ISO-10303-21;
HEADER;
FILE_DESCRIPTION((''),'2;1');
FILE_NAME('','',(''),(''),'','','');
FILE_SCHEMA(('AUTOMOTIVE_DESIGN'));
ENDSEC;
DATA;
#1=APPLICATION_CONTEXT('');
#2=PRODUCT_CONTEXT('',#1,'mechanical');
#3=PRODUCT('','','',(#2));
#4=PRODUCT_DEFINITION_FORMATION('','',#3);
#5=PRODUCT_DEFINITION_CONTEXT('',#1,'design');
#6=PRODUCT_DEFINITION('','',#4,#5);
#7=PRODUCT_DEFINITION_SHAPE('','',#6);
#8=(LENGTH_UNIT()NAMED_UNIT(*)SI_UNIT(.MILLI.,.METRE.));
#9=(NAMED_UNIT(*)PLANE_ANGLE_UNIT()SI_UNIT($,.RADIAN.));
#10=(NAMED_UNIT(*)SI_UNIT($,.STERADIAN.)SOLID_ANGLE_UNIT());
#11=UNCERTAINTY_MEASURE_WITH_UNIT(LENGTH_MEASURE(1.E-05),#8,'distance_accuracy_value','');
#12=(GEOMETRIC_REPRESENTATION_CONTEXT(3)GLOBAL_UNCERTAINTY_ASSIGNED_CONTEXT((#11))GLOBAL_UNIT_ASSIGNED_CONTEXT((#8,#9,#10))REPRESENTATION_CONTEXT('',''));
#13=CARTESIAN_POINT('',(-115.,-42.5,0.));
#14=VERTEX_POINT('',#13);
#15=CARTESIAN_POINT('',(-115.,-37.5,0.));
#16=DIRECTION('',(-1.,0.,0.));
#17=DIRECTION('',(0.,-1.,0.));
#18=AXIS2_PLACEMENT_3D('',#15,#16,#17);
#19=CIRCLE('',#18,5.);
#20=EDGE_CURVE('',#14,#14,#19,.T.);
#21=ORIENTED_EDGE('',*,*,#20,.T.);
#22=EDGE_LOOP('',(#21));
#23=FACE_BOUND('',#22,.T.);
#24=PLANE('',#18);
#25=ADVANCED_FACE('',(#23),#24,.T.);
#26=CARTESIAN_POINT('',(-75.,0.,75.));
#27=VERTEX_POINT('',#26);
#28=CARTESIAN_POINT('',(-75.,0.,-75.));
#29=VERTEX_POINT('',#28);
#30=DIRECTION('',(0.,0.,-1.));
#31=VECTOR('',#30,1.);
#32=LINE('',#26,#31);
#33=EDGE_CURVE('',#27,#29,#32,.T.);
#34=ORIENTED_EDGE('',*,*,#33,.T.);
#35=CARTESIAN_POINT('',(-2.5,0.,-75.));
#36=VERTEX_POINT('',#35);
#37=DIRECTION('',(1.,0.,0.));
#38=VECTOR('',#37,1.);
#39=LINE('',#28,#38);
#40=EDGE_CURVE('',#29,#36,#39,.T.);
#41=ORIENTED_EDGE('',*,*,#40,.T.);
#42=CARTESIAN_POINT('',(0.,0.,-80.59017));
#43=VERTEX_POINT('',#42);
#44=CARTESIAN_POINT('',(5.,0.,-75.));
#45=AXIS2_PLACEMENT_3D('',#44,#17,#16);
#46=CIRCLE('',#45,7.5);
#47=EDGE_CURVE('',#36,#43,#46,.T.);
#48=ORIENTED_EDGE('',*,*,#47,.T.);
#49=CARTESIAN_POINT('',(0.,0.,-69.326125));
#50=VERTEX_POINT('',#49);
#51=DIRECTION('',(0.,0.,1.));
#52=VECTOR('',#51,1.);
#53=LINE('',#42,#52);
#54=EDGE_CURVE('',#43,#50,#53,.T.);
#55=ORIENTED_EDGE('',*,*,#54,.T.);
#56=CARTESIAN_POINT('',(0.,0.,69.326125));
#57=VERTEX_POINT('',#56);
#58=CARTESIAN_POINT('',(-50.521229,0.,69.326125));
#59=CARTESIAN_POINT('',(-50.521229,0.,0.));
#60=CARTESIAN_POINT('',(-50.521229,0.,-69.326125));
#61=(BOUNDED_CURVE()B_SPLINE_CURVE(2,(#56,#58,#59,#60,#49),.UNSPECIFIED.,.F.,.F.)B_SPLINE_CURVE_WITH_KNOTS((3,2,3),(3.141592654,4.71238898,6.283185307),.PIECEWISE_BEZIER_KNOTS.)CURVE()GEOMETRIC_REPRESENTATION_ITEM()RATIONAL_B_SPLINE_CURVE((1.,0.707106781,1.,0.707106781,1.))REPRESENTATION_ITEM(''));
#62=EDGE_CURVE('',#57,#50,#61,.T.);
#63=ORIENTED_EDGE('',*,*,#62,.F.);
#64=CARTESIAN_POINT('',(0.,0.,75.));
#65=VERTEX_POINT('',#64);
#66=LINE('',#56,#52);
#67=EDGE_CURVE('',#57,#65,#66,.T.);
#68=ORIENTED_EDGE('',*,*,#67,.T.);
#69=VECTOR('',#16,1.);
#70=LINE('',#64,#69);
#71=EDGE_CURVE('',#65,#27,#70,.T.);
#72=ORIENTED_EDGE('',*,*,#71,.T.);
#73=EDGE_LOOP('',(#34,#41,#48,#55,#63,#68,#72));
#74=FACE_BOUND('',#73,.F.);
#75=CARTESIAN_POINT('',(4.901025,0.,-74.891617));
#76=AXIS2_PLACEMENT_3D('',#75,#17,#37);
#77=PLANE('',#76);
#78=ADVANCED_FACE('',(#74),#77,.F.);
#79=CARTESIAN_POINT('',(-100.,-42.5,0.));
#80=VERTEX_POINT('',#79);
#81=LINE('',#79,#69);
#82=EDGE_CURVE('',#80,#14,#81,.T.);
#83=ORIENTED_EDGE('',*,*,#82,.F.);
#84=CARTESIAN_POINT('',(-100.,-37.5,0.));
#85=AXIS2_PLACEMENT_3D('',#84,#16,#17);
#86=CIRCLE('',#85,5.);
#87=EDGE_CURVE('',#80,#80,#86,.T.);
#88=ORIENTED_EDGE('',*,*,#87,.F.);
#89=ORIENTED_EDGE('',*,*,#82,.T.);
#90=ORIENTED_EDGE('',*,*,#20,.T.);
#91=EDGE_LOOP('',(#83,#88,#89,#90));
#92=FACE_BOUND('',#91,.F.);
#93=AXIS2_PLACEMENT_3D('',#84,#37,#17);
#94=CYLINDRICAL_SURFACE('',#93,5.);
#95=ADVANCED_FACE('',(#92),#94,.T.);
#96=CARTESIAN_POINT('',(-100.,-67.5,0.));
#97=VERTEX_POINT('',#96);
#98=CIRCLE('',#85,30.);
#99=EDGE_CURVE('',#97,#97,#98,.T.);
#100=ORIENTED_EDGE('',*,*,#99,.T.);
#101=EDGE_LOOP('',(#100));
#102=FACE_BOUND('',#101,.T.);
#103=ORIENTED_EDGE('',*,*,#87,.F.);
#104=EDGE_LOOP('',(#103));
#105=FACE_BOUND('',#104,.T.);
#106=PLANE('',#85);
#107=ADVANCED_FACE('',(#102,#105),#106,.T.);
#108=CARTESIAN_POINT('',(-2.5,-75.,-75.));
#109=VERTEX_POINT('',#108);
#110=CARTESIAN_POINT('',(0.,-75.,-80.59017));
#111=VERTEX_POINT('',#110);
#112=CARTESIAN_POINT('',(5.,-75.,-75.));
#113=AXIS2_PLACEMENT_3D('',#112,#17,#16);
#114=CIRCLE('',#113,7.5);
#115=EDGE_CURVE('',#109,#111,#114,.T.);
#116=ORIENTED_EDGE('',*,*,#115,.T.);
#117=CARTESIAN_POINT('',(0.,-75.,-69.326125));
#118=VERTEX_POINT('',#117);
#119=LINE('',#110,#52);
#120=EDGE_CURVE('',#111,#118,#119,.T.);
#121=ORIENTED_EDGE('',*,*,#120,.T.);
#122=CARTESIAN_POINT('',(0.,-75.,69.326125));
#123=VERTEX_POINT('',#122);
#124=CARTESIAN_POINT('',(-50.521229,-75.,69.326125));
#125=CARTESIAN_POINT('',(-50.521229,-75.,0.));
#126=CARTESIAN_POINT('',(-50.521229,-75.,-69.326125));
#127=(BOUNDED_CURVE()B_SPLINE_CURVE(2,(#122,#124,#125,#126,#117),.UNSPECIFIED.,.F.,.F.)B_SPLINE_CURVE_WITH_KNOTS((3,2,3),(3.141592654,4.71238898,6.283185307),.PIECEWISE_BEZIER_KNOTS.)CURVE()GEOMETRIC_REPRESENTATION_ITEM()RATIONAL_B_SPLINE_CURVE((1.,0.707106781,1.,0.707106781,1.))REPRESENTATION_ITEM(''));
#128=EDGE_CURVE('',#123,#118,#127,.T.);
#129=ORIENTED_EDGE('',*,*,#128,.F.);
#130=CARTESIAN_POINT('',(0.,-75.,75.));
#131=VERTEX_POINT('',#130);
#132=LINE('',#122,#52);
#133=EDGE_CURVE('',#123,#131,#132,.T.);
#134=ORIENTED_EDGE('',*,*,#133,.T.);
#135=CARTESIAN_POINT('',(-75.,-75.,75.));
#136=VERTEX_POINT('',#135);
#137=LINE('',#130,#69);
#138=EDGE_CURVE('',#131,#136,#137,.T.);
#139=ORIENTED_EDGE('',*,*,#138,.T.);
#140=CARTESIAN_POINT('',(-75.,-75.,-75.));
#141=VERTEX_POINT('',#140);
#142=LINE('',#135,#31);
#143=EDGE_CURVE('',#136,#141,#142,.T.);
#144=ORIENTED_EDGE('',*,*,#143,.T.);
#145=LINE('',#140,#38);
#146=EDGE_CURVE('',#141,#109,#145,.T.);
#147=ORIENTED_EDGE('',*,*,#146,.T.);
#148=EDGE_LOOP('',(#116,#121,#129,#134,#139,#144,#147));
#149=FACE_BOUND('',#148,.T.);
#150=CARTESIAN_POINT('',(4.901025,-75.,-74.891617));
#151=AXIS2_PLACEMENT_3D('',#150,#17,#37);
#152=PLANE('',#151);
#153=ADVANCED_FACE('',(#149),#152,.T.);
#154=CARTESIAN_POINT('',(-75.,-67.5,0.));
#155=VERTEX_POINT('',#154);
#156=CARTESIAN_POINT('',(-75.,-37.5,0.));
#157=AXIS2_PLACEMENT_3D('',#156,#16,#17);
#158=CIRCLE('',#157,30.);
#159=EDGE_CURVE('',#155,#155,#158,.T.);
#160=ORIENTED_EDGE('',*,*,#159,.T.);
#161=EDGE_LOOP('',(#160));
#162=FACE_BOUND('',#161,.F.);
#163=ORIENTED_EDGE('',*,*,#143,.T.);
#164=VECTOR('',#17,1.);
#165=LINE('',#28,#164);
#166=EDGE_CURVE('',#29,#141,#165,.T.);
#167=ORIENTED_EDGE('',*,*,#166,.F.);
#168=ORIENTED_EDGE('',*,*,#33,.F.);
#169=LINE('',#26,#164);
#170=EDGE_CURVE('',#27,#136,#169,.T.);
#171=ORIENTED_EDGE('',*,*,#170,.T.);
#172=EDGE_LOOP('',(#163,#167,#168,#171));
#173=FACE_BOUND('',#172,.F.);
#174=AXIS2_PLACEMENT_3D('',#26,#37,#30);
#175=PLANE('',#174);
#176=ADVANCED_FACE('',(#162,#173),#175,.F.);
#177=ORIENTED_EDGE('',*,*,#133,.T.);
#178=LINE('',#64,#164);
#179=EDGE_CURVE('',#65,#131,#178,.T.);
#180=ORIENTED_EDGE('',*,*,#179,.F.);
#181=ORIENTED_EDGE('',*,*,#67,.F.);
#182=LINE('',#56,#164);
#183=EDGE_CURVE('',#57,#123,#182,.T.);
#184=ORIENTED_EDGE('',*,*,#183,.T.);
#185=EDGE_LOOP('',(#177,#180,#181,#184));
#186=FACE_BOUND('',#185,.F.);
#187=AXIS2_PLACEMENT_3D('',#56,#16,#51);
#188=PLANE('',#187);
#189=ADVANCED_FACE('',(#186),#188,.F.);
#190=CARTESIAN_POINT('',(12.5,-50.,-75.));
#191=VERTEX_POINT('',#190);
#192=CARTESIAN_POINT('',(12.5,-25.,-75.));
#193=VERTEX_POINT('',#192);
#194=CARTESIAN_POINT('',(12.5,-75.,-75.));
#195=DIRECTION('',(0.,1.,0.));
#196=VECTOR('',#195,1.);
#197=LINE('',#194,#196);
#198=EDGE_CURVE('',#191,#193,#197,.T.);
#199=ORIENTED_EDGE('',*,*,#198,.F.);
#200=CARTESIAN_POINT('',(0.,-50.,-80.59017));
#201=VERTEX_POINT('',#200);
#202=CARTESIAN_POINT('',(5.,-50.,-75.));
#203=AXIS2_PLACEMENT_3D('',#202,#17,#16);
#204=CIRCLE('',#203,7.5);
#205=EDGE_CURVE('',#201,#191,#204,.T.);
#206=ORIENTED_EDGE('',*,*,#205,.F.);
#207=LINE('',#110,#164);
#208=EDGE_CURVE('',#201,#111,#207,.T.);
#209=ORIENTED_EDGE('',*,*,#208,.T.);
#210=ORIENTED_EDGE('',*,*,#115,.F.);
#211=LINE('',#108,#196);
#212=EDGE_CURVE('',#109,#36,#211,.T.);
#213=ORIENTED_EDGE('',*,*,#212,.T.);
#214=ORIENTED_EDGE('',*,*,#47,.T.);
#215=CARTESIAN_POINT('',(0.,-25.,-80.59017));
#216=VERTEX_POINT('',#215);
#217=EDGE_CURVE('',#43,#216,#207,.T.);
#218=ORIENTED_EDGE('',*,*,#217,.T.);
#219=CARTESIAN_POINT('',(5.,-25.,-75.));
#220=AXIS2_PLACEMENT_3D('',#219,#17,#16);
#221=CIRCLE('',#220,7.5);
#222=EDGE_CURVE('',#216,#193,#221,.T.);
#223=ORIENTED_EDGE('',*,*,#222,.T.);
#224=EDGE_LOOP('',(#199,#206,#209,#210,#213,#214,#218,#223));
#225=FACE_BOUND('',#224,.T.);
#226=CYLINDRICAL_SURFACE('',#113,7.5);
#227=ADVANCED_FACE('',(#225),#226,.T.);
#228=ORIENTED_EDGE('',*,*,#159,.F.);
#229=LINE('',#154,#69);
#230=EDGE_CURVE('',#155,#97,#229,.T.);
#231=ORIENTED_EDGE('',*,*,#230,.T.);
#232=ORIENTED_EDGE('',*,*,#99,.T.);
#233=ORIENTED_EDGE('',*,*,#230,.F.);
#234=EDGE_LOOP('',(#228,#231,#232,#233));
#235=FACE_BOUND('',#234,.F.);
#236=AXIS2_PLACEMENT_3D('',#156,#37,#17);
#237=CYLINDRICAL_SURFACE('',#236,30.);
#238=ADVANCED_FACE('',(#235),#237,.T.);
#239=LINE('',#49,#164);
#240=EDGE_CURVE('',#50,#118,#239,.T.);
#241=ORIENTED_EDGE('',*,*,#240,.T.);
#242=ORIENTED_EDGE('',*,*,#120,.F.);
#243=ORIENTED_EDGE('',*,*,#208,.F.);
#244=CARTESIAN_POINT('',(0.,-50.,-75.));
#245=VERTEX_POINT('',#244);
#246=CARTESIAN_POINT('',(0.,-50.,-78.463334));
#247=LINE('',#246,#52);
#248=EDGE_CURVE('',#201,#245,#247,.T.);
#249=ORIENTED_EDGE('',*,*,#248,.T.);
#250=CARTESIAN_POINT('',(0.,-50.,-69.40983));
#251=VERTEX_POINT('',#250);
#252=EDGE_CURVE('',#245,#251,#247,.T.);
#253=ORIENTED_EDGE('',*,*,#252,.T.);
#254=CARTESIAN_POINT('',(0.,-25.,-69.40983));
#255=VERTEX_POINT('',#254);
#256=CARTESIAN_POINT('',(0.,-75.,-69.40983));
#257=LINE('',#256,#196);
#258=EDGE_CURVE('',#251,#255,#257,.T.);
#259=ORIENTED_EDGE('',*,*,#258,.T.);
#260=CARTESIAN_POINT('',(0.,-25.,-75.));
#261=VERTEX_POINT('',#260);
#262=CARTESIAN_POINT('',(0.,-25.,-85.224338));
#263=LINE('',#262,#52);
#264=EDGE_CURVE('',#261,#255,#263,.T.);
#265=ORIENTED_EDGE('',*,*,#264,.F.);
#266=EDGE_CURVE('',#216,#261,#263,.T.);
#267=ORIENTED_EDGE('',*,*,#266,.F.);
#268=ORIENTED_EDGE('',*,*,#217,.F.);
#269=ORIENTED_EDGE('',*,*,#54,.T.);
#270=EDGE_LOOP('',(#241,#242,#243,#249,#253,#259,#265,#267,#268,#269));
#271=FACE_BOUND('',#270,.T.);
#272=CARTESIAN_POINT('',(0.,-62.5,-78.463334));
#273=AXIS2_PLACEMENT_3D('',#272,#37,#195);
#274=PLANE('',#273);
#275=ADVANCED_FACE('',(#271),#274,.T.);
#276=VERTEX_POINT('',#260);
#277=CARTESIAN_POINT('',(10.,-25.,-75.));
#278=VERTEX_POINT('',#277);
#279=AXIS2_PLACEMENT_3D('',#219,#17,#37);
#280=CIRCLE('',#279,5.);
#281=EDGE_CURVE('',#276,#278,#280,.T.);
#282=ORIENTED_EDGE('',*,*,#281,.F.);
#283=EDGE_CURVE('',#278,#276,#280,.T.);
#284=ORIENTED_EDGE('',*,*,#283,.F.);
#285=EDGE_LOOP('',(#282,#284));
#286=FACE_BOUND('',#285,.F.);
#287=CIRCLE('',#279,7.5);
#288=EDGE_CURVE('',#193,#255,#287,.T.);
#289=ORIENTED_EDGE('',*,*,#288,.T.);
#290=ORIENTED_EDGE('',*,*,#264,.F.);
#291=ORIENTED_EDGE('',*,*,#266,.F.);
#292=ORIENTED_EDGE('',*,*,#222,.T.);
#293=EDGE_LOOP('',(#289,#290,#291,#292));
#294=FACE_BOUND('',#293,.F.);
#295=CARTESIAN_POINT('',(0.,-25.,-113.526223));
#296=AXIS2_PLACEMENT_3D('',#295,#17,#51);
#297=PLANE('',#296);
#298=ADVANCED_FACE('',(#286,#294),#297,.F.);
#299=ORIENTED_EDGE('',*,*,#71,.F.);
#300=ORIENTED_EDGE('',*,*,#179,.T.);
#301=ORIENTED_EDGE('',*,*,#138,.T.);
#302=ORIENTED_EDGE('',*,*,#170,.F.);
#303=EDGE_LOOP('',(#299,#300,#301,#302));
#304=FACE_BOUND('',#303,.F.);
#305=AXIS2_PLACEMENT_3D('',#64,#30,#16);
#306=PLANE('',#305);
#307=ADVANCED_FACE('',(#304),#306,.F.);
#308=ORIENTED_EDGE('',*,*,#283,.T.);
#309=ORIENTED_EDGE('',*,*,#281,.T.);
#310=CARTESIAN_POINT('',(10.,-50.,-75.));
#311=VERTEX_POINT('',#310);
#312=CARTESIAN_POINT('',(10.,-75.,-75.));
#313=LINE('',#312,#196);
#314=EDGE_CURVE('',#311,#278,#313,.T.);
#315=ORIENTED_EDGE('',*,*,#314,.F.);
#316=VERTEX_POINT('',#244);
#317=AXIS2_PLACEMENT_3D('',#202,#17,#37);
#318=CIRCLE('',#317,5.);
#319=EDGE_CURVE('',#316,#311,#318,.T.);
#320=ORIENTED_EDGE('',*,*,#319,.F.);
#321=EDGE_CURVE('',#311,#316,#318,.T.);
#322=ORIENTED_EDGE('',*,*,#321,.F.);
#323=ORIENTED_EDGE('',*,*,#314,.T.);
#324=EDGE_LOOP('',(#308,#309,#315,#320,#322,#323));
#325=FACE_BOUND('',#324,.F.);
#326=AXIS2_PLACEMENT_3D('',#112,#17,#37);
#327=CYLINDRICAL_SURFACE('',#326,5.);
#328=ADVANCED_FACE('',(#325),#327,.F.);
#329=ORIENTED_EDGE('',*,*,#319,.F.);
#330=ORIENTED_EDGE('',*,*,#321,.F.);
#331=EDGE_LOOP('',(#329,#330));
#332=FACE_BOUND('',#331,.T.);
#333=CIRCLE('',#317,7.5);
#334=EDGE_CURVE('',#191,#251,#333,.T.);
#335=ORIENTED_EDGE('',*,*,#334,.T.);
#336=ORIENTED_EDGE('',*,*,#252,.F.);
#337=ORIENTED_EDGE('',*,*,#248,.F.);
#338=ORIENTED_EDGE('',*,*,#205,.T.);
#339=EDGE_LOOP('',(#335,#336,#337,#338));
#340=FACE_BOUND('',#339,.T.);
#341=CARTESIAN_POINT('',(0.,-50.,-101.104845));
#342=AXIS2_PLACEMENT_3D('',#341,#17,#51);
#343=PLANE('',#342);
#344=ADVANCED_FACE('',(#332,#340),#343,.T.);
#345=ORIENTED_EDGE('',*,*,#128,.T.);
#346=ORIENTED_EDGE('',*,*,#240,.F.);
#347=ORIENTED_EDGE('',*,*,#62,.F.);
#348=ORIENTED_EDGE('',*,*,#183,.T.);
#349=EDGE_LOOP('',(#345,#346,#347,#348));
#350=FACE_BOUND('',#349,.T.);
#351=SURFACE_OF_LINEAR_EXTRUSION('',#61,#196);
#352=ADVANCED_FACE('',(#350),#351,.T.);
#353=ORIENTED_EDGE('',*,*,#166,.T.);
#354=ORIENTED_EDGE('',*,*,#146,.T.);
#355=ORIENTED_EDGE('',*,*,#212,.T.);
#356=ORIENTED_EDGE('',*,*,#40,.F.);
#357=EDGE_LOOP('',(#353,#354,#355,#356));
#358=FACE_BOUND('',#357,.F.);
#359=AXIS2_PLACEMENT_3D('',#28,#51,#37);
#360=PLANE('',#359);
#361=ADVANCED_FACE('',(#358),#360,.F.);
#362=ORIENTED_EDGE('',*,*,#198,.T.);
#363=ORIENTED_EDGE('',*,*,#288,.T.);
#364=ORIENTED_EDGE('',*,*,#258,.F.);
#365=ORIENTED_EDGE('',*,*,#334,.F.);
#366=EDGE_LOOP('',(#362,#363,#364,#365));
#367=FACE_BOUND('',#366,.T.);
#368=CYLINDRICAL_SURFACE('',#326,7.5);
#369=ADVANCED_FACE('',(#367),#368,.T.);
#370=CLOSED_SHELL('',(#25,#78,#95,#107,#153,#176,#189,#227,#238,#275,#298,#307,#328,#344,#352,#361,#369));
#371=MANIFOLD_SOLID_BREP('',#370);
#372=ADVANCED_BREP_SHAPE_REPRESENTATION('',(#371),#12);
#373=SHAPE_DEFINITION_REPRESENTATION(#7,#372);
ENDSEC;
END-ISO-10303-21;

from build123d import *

# Parameters (mm, degrees)
F1_DEPTH  = 75
F2_R      = 30
F3_DEPTH  = 25
F4_R      = 5
F5_DEPTH  = 15
F7_DEPTH  = 75
F8_R      = 5
F9_DEPTH  = 75
F10_W     = 25
F10_H     = 45.2830219137
F10_W_2   = 34.9056578674
F10_H_2   = 56.6037699187
F11_DEPTH = 25


# Not quite as in the source:
# - a feature names something its author has since deleted; it is built from what else it names


with BuildPart() as f1:
    # F0 (on Front) → F1 (new body)
    with BuildSketch(Plane.XZ):
        with BuildLine():
            Line((-75, -75), (0, -75))
            Line((0, -75), (0, -69.3261250854))
            add(Edge.make_bspline(
                [(0, 69.3261250854), (-50.5212285231, 69.3261250854), (-50.5212285231, 0), (-50.5212285231, -69.3261250854), (0, -69.3261250854)],
                knots=[3.1415926536, 3.1415926536, 3.1415926536, 4.7123889804, 4.7123889804, 6.2831853072, 6.2831853072, 6.2831853072], degree=2, weights=[1, 0.7071067812, 1, 0.7071067812, 1]))
            Line((0, 69.3261250854), (0, 75))
            Line((0, 75), (-75, 75))
            Line((-75, 75), (-75, -75))
        make_face()
    extrude(amount=F1_DEPTH)

    # F2 (on face) → F3 (join)
    with BuildSketch(Plane(origin=(-75, 0, 0), x_dir=(0, -1, 0), z_dir=(-1, 0, 0))):
        with Locations((37.5, 0)):
            Circle(F2_R)
    extrude(amount=F3_DEPTH)

    # F4 (on face) → F5 (join)
    with BuildSketch(Plane(origin=(-100, 0, 0), x_dir=(0, -1, 0), z_dir=(-1, 0, 0))):
        with Locations((37.5, 0)):
            Circle(F4_R)
    extrude(amount=F5_DEPTH)

    # F6 (on face) → F7 (join)
    with BuildSketch(Plane.XZ.offset(75)):
        with BuildLine():
            ThreePointArc((-2.5, -75), (5, -82.5), (12.5, -75))
            ThreePointArc((12.5, -75), (8.0618621785, -68.1534680312), (0, -69.4098300563))
            Line((0, -69.4098300563), (0, -75))
            Line((0, -75), (-2.5, -75))
        make_face()
    extrude(amount=-F7_DEPTH)

    # F8 (on face) → F9 (cut)
    with BuildSketch(Plane.XZ.offset(75)):
        with Locations((5, -75)):
            Circle(F8_R)
    extrude(amount=-F9_DEPTH, mode=Mode.SUBTRACT)

    # F10 (on Right) → F11 (cut)
    with BuildSketch(Plane.YZ):
        with Locations((-62.5, -78.4633336838)):
            Rectangle(F10_W, F10_H)
        with Locations((-7.5471710663, -85.2243384972)):
            Rectangle(F10_W_2, F10_H_2)
    extrude(amount=F11_DEPTH, mode=Mode.SUBTRACT)


solid = f1.part
